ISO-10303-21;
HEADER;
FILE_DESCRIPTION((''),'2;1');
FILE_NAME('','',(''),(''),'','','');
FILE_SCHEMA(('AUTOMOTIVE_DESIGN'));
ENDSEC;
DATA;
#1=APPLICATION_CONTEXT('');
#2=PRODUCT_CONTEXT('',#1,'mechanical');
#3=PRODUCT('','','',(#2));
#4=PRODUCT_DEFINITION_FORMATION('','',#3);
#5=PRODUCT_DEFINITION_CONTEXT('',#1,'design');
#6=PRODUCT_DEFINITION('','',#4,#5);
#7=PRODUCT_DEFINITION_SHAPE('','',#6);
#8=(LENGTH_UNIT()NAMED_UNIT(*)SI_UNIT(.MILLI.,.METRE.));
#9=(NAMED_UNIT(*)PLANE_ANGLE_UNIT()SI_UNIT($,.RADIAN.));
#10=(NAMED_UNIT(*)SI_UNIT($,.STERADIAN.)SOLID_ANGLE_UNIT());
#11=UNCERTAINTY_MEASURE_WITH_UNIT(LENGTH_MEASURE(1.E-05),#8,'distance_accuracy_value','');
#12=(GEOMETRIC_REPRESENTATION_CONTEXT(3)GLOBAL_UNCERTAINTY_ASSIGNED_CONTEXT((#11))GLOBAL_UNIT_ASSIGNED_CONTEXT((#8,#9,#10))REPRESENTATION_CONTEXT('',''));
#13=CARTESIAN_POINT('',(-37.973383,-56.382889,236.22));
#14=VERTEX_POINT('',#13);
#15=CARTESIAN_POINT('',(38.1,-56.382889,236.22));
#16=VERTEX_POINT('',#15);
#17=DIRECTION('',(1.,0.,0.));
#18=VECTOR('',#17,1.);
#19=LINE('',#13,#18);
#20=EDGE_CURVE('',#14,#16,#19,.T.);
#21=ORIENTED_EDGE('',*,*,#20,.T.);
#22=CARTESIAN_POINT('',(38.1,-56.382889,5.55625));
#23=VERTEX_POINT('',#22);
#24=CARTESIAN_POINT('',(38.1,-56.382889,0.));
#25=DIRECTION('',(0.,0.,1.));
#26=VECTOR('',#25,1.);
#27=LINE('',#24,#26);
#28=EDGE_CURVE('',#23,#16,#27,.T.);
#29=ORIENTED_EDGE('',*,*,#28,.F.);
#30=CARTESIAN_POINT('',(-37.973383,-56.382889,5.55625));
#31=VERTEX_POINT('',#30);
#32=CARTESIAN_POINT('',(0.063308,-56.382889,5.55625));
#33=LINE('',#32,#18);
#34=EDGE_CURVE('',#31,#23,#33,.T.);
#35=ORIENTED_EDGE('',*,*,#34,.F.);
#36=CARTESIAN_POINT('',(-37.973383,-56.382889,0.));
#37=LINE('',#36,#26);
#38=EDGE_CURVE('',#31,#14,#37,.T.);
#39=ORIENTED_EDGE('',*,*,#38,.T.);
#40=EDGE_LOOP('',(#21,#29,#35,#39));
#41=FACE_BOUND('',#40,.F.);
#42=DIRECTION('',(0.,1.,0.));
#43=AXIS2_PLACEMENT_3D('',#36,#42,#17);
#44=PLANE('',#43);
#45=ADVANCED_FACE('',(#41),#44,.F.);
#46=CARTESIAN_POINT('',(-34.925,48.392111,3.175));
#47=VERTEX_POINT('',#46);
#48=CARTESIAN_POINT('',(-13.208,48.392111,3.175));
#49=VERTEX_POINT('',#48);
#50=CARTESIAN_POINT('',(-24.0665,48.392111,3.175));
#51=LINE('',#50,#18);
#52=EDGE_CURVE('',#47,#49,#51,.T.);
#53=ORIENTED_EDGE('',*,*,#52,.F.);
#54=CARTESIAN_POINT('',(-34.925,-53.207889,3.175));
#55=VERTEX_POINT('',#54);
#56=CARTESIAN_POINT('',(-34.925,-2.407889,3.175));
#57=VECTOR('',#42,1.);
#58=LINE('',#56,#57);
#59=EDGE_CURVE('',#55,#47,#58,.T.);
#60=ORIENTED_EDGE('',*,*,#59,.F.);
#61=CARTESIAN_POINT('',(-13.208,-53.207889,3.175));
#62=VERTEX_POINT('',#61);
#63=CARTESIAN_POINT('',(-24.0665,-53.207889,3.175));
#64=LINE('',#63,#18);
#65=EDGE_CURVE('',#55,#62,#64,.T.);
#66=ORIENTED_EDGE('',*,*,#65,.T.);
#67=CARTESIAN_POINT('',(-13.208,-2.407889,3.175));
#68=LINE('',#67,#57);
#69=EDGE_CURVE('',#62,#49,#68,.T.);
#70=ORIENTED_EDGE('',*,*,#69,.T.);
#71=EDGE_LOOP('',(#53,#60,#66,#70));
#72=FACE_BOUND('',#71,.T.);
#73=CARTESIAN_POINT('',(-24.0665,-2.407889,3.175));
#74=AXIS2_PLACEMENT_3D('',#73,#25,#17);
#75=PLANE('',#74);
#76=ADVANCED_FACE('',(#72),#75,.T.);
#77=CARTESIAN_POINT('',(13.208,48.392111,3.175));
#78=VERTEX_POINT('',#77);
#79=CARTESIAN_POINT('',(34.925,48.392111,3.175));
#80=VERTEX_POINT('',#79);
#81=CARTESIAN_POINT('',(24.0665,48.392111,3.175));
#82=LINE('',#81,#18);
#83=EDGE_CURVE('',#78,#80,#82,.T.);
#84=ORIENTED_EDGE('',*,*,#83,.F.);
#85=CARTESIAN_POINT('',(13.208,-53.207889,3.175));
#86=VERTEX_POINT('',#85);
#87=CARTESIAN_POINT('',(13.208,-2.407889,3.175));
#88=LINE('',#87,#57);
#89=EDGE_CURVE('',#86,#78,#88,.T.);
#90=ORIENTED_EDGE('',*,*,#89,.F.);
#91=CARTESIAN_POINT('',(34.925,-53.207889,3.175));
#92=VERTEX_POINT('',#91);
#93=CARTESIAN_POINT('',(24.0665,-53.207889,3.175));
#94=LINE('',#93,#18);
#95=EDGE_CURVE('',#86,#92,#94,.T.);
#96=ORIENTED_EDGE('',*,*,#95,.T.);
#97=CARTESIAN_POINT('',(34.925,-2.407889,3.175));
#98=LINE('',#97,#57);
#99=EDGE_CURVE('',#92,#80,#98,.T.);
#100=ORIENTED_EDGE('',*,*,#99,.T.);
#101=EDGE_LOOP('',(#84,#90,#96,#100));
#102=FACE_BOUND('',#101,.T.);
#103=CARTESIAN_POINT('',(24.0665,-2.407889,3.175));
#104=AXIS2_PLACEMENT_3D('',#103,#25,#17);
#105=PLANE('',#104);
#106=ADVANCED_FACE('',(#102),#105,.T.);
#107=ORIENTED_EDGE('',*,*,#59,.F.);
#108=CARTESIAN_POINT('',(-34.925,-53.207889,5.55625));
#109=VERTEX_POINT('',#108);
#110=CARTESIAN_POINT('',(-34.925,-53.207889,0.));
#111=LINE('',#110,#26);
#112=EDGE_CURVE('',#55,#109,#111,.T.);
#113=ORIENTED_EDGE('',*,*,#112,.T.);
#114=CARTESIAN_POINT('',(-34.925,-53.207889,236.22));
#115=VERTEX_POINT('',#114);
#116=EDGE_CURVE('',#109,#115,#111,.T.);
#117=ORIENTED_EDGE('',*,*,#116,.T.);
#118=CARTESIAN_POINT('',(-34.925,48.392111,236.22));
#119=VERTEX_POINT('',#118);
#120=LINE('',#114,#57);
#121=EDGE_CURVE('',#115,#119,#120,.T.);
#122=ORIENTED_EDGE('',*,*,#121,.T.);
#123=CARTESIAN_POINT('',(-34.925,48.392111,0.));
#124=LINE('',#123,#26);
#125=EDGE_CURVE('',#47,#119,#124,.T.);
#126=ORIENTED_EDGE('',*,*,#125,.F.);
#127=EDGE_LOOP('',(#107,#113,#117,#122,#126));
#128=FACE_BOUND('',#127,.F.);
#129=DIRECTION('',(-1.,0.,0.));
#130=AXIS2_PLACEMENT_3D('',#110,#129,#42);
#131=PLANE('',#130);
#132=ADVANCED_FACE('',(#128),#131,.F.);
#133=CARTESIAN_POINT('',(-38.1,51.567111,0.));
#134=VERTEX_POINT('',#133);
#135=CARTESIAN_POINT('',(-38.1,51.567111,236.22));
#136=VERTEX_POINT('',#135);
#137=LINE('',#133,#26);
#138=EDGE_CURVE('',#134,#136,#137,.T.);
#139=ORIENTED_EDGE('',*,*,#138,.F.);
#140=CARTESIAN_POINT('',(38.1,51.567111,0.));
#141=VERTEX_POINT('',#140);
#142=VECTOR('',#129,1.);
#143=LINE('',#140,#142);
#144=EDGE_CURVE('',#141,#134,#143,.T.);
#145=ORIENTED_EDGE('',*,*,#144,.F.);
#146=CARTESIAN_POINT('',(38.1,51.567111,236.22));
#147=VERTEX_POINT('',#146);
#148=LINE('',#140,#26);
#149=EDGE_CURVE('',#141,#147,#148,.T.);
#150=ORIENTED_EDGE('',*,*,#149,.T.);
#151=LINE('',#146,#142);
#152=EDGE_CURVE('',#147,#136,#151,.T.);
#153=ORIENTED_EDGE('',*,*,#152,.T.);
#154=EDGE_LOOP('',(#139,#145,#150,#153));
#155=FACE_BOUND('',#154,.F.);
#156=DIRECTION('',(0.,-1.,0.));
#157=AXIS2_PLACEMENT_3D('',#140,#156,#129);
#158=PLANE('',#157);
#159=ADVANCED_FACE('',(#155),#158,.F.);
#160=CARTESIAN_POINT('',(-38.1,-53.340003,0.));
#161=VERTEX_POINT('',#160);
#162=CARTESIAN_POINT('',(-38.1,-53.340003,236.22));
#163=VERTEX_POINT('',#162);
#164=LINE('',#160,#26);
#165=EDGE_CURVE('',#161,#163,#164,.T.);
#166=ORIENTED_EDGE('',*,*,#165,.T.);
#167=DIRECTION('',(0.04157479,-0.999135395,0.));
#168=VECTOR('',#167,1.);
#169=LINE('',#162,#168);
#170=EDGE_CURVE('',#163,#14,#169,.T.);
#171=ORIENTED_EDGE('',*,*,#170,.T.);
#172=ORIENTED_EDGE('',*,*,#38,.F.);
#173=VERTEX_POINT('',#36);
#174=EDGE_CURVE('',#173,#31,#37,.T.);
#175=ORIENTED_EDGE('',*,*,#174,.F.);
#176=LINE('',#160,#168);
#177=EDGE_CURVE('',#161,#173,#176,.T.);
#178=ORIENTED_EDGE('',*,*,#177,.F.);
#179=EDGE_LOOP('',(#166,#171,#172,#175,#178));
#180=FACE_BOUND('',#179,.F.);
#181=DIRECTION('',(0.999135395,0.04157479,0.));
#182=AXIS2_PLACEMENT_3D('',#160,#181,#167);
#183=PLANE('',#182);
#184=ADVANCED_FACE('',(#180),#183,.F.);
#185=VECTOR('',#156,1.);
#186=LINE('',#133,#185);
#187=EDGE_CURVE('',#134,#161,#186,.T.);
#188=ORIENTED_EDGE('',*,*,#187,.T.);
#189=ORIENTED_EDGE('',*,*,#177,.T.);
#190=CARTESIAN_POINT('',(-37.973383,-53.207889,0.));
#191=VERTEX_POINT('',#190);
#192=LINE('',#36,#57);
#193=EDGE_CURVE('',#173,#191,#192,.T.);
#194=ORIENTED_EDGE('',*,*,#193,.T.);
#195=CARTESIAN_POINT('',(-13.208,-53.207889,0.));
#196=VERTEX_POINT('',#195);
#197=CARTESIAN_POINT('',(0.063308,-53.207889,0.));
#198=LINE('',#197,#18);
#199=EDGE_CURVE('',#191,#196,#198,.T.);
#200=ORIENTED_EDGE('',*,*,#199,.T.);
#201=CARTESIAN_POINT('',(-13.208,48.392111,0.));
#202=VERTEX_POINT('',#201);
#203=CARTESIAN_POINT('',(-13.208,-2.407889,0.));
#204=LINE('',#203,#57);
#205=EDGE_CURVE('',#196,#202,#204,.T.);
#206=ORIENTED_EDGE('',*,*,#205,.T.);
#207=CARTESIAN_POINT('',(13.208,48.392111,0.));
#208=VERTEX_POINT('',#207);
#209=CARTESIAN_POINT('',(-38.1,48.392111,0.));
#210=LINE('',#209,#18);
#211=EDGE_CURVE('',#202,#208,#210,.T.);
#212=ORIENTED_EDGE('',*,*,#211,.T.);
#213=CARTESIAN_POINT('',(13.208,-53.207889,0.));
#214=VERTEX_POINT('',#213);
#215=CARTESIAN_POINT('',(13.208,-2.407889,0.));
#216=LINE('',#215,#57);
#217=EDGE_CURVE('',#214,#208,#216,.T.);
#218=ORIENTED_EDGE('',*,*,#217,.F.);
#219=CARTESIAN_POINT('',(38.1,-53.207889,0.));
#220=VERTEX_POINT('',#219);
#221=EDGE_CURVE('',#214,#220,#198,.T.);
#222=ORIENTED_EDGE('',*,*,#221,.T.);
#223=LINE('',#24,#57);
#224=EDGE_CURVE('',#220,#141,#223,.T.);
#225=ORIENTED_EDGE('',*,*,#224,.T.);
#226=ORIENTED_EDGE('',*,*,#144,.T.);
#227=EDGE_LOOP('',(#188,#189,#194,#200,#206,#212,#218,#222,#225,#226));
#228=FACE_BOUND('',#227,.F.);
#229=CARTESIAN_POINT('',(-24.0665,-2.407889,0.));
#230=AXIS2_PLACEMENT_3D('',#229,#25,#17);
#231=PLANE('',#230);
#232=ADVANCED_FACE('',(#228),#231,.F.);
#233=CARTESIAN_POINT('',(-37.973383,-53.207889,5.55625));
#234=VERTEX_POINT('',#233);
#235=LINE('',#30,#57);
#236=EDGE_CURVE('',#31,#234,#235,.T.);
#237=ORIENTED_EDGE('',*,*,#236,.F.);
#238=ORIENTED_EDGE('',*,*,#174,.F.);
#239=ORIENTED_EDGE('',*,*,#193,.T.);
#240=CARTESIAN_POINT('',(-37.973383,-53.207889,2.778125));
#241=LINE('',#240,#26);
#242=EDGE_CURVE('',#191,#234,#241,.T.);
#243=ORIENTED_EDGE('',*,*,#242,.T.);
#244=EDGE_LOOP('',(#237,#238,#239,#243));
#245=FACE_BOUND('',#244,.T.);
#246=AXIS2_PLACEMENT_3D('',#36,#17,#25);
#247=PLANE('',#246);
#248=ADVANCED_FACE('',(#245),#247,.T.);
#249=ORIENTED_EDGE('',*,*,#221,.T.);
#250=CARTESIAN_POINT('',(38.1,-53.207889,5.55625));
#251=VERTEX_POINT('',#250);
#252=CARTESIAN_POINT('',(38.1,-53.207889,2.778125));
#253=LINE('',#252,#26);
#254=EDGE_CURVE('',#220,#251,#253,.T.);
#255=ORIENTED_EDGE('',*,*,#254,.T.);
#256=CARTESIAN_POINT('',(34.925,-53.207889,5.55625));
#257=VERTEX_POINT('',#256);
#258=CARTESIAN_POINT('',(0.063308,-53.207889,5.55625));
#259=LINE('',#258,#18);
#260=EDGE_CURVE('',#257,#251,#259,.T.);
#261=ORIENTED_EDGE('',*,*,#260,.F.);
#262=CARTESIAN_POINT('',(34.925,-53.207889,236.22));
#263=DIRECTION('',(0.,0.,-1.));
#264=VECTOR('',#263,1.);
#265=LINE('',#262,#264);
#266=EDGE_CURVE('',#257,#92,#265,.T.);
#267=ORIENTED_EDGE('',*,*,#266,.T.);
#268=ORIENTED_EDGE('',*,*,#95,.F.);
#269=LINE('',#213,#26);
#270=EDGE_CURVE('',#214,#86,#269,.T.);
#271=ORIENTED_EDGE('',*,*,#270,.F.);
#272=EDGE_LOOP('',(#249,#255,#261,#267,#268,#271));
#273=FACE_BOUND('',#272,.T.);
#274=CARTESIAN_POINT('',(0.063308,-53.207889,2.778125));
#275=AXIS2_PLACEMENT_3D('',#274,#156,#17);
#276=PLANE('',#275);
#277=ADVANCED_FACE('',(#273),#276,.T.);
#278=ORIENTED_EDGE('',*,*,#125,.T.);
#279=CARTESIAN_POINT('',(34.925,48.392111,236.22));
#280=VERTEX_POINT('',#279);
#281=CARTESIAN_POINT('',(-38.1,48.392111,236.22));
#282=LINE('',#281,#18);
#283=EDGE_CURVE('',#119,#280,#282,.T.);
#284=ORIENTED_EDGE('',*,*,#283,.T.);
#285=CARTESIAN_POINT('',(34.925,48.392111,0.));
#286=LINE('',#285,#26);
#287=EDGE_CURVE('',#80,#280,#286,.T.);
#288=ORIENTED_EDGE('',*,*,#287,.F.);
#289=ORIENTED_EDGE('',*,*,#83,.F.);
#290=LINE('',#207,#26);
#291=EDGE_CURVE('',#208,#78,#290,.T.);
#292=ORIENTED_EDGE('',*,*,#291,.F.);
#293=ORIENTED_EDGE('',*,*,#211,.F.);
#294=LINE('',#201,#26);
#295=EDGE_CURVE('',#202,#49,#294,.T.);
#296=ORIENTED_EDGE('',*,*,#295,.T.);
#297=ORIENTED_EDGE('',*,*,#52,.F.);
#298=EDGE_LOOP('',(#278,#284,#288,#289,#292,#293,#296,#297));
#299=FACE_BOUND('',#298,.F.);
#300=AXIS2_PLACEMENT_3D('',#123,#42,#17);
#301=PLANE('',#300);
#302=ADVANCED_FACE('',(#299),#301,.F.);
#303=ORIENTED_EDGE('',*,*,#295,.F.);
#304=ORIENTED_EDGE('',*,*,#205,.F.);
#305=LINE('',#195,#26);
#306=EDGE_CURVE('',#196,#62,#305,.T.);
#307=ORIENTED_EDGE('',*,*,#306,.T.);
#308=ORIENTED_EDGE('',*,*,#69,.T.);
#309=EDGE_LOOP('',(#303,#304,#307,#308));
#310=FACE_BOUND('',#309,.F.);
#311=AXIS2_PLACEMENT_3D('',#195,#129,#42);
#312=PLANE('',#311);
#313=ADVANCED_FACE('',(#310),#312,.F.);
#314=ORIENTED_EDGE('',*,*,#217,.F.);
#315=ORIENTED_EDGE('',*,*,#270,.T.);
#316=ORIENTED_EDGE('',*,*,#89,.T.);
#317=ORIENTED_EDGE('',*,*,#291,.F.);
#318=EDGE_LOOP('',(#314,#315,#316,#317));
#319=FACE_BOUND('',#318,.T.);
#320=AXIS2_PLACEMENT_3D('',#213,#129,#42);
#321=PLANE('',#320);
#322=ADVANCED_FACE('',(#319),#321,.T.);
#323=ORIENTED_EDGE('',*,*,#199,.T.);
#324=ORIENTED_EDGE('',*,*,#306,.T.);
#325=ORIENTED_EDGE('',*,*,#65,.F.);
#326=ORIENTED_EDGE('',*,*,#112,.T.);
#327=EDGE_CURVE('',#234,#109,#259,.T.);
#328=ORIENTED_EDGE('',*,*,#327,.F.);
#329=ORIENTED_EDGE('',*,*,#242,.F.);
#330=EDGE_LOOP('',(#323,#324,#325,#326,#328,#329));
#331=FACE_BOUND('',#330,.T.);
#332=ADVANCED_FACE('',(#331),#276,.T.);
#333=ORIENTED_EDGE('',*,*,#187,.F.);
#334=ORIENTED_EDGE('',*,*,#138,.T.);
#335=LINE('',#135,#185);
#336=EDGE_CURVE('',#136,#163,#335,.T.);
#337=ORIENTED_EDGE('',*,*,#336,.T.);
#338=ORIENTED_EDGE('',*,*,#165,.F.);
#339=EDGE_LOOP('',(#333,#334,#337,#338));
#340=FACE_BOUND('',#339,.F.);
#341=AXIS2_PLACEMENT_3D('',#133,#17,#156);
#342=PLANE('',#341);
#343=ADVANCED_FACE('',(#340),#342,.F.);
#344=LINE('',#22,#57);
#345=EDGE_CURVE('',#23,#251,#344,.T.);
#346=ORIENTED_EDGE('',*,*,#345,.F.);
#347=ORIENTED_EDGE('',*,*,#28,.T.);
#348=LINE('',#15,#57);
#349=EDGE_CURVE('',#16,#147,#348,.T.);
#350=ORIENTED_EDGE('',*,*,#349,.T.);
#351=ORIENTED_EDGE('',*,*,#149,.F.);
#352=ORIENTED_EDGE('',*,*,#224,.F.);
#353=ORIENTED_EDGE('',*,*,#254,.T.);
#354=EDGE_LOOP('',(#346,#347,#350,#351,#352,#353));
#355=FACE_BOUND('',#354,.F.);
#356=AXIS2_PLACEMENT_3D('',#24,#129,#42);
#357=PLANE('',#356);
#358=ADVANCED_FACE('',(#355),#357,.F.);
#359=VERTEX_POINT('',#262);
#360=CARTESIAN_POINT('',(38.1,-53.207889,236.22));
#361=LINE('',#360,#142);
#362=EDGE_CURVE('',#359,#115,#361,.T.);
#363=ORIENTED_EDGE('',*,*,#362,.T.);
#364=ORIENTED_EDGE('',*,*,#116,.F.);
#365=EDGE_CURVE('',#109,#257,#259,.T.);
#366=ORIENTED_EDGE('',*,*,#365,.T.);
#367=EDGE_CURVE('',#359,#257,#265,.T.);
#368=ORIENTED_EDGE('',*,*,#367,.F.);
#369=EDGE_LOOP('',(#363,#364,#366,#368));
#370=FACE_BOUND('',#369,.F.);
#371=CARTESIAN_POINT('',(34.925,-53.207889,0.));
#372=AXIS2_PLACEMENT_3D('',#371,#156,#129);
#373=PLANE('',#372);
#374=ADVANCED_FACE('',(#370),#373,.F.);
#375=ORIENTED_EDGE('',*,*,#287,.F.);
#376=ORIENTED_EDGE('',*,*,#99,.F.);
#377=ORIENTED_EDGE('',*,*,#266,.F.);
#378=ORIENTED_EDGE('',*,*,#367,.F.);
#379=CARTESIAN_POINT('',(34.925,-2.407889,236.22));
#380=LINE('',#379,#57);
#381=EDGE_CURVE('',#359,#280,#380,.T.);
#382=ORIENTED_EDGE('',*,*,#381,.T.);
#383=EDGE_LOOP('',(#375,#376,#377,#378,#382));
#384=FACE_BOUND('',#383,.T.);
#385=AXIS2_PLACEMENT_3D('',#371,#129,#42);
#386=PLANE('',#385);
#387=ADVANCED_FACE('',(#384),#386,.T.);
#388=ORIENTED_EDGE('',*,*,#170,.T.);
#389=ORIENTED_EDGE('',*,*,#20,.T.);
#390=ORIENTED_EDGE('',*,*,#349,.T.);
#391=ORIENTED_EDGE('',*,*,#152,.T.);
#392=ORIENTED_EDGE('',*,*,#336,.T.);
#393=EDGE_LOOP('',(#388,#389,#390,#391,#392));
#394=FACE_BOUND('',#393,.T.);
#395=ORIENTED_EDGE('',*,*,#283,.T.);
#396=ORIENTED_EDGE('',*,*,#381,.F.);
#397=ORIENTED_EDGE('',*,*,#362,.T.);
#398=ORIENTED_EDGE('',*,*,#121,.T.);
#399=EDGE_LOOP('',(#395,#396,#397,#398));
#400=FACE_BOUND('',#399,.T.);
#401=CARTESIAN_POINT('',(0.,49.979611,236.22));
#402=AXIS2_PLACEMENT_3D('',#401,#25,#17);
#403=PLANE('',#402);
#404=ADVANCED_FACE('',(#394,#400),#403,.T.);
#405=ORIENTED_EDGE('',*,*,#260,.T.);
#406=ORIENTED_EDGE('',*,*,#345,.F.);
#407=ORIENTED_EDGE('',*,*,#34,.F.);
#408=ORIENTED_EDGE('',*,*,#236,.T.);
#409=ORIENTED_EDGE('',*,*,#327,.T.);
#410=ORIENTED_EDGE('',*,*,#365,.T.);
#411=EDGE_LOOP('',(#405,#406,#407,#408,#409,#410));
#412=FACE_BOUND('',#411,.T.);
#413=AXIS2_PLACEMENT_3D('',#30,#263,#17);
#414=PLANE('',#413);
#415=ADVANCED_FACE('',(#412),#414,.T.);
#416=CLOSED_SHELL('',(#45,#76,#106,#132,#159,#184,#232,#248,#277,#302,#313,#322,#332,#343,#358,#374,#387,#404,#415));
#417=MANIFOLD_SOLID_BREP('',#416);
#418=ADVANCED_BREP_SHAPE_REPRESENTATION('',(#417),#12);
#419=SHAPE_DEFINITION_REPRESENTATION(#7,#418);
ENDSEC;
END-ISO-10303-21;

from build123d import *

# Parameters (mm, degrees)
F0_W     = 3.175
F0_H     = 101.6
F1_DEPTH = 228.6
F2_DEPTH = 236.22
F0_W_2   = 21.717
F3_DEPTH = 3.175
F4_W     = 76.0733831866
F4_H     = 5.55625
F5_DEPTH = 3.175


# Not quite as in the source:
# - the program builds the solid bodies; features that only make, move or delete a surface that nothing else refers to are left out


with BuildPart() as f1:
    # F0 (on Top) → F1 (new body)
    with BuildSketch(Plane.XY):
        with Locations((36.5125, -2.4078887083)):
            Rectangle(F0_W, F0_H)
    extrude(amount=F1_DEPTH)

    # F0 (on Top) → F2 (join)
    with BuildSketch(Plane.XY):
        Polygon((-34.925, 48.3921112917), (-13.208, 48.3921112917), (13.208, 48.3921112917), (34.925, 48.3921112917), (38.1, 48.3921112917), (38.1, 51.5671112917), (-38.1, 51.5671112917), (-38.1, 48.3921112917), align=None)
        Polygon((-34.925, -53.2078887083), (-34.925, 48.3921112917), (-38.1, 48.3921112917), (-38.1, -53.3400028944), align=None)
        Polygon((13.208, -53.2078887083), (-13.208, -53.2078887083), (-34.925, -53.2078887083), (-38.1, -53.3400028944), (-37.9733831866, -56.3828887083), (38.1, -56.3828887083), (38.1, -53.2078887083), (34.925, -53.2078887083), align=None)
        with Locations((36.5125, -2.4078887083)):
            Rectangle(F0_W, F0_H)
    extrude(amount=F2_DEPTH)

    # F0 (on Top) → F3 (join)
    with BuildSketch(Plane.XY):
        with Locations((-24.0665, -2.4078887083)):
            Rectangle(F0_W_2, F0_H)
        with Locations((24.0665, -2.4078887083)):
            Rectangle(F0_W_2, F0_H)
    extrude(amount=F3_DEPTH)

    # F4 (on face) → F5 (cut)
    with BuildSketch(Plane.XZ.offset(56.3828887083)):
        with Locations((0.0633084067, 2.778125)):
            Rectangle(F4_W, F4_H)
    extrude(amount=-F5_DEPTH, mode=Mode.SUBTRACT)


solid = f1.part
